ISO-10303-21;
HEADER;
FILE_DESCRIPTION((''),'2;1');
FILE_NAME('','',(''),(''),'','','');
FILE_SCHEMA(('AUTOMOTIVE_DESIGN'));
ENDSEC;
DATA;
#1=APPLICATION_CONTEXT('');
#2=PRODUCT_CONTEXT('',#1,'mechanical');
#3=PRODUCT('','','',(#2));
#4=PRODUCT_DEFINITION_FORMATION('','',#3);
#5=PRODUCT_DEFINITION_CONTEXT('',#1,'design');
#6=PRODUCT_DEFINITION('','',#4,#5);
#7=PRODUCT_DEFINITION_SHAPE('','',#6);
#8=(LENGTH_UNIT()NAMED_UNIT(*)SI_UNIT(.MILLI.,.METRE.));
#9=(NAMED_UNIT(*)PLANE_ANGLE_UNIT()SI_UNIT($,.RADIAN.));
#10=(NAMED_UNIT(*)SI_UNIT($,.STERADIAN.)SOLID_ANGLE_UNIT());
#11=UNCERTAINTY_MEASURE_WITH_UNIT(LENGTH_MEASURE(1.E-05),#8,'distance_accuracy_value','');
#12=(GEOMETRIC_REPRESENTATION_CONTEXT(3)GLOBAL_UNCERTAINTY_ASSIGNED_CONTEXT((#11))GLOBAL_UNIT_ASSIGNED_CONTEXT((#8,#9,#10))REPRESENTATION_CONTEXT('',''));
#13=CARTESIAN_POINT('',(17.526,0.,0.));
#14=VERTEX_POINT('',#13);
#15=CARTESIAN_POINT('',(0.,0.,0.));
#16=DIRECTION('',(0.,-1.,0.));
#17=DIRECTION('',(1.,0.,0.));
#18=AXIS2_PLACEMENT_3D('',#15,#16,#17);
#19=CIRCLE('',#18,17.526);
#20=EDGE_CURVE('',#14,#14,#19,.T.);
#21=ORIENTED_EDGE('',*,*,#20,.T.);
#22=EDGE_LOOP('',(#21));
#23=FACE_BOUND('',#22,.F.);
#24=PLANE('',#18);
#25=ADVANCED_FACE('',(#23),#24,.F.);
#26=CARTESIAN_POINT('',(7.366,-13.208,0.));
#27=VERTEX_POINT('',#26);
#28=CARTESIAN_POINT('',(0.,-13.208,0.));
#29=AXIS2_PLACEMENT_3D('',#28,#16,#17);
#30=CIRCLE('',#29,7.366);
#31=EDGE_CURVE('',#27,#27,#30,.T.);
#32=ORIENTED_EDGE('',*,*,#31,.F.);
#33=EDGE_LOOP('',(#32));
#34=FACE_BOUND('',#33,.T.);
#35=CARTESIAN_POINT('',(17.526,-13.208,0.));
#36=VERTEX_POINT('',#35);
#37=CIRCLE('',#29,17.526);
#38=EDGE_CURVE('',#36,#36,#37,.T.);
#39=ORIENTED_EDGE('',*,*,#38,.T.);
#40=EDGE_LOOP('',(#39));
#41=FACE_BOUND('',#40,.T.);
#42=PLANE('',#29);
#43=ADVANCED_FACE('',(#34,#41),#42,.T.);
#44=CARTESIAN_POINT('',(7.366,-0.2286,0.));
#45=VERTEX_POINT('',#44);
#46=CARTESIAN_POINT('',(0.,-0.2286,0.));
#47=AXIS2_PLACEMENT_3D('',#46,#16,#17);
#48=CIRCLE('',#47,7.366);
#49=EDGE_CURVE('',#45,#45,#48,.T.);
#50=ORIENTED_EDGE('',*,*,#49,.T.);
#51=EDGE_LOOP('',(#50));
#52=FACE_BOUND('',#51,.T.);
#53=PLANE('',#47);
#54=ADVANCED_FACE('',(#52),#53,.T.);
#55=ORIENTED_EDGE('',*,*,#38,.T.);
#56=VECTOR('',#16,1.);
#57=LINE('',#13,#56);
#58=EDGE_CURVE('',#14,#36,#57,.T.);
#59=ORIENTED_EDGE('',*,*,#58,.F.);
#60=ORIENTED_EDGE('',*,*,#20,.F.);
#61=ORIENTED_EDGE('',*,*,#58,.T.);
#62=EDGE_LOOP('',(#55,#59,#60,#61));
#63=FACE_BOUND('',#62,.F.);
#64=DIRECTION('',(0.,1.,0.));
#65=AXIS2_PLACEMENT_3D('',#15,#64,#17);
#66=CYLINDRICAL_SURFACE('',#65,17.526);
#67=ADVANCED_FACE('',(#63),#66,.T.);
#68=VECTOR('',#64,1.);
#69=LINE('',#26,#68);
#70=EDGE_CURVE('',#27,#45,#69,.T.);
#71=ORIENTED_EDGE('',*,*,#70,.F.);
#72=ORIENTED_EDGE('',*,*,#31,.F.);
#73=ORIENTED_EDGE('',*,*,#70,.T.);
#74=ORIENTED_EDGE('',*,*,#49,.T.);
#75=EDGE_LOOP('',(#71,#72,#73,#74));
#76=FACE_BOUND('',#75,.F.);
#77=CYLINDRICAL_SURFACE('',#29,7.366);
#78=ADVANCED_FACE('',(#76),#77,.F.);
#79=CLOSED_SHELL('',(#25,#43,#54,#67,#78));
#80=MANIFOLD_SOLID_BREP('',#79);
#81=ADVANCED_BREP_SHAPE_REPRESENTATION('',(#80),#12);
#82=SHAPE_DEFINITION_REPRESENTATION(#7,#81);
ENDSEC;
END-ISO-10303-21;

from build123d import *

# Parameters (mm, degrees)
F0_R     = 17.526
F1_DEPTH = 13.208
F2_R     = 7.366
F3_DEPTH = 12.9794


# Not quite as in the source:
# - a feature names something its author has since deleted; it is built from what else it names


with BuildPart() as f1:
    # F0 (on Front) → F1 (new body)
    with BuildSketch(Plane.XZ):
        Circle(F0_R)
    extrude(amount=F1_DEPTH)

    # F2 (on face) → F3 (cut)
    with BuildSketch(Plane.XZ.offset(13.208)):
        Circle(F2_R)
    extrude(amount=-F3_DEPTH, mode=Mode.SUBTRACT)


solid = f1.part
